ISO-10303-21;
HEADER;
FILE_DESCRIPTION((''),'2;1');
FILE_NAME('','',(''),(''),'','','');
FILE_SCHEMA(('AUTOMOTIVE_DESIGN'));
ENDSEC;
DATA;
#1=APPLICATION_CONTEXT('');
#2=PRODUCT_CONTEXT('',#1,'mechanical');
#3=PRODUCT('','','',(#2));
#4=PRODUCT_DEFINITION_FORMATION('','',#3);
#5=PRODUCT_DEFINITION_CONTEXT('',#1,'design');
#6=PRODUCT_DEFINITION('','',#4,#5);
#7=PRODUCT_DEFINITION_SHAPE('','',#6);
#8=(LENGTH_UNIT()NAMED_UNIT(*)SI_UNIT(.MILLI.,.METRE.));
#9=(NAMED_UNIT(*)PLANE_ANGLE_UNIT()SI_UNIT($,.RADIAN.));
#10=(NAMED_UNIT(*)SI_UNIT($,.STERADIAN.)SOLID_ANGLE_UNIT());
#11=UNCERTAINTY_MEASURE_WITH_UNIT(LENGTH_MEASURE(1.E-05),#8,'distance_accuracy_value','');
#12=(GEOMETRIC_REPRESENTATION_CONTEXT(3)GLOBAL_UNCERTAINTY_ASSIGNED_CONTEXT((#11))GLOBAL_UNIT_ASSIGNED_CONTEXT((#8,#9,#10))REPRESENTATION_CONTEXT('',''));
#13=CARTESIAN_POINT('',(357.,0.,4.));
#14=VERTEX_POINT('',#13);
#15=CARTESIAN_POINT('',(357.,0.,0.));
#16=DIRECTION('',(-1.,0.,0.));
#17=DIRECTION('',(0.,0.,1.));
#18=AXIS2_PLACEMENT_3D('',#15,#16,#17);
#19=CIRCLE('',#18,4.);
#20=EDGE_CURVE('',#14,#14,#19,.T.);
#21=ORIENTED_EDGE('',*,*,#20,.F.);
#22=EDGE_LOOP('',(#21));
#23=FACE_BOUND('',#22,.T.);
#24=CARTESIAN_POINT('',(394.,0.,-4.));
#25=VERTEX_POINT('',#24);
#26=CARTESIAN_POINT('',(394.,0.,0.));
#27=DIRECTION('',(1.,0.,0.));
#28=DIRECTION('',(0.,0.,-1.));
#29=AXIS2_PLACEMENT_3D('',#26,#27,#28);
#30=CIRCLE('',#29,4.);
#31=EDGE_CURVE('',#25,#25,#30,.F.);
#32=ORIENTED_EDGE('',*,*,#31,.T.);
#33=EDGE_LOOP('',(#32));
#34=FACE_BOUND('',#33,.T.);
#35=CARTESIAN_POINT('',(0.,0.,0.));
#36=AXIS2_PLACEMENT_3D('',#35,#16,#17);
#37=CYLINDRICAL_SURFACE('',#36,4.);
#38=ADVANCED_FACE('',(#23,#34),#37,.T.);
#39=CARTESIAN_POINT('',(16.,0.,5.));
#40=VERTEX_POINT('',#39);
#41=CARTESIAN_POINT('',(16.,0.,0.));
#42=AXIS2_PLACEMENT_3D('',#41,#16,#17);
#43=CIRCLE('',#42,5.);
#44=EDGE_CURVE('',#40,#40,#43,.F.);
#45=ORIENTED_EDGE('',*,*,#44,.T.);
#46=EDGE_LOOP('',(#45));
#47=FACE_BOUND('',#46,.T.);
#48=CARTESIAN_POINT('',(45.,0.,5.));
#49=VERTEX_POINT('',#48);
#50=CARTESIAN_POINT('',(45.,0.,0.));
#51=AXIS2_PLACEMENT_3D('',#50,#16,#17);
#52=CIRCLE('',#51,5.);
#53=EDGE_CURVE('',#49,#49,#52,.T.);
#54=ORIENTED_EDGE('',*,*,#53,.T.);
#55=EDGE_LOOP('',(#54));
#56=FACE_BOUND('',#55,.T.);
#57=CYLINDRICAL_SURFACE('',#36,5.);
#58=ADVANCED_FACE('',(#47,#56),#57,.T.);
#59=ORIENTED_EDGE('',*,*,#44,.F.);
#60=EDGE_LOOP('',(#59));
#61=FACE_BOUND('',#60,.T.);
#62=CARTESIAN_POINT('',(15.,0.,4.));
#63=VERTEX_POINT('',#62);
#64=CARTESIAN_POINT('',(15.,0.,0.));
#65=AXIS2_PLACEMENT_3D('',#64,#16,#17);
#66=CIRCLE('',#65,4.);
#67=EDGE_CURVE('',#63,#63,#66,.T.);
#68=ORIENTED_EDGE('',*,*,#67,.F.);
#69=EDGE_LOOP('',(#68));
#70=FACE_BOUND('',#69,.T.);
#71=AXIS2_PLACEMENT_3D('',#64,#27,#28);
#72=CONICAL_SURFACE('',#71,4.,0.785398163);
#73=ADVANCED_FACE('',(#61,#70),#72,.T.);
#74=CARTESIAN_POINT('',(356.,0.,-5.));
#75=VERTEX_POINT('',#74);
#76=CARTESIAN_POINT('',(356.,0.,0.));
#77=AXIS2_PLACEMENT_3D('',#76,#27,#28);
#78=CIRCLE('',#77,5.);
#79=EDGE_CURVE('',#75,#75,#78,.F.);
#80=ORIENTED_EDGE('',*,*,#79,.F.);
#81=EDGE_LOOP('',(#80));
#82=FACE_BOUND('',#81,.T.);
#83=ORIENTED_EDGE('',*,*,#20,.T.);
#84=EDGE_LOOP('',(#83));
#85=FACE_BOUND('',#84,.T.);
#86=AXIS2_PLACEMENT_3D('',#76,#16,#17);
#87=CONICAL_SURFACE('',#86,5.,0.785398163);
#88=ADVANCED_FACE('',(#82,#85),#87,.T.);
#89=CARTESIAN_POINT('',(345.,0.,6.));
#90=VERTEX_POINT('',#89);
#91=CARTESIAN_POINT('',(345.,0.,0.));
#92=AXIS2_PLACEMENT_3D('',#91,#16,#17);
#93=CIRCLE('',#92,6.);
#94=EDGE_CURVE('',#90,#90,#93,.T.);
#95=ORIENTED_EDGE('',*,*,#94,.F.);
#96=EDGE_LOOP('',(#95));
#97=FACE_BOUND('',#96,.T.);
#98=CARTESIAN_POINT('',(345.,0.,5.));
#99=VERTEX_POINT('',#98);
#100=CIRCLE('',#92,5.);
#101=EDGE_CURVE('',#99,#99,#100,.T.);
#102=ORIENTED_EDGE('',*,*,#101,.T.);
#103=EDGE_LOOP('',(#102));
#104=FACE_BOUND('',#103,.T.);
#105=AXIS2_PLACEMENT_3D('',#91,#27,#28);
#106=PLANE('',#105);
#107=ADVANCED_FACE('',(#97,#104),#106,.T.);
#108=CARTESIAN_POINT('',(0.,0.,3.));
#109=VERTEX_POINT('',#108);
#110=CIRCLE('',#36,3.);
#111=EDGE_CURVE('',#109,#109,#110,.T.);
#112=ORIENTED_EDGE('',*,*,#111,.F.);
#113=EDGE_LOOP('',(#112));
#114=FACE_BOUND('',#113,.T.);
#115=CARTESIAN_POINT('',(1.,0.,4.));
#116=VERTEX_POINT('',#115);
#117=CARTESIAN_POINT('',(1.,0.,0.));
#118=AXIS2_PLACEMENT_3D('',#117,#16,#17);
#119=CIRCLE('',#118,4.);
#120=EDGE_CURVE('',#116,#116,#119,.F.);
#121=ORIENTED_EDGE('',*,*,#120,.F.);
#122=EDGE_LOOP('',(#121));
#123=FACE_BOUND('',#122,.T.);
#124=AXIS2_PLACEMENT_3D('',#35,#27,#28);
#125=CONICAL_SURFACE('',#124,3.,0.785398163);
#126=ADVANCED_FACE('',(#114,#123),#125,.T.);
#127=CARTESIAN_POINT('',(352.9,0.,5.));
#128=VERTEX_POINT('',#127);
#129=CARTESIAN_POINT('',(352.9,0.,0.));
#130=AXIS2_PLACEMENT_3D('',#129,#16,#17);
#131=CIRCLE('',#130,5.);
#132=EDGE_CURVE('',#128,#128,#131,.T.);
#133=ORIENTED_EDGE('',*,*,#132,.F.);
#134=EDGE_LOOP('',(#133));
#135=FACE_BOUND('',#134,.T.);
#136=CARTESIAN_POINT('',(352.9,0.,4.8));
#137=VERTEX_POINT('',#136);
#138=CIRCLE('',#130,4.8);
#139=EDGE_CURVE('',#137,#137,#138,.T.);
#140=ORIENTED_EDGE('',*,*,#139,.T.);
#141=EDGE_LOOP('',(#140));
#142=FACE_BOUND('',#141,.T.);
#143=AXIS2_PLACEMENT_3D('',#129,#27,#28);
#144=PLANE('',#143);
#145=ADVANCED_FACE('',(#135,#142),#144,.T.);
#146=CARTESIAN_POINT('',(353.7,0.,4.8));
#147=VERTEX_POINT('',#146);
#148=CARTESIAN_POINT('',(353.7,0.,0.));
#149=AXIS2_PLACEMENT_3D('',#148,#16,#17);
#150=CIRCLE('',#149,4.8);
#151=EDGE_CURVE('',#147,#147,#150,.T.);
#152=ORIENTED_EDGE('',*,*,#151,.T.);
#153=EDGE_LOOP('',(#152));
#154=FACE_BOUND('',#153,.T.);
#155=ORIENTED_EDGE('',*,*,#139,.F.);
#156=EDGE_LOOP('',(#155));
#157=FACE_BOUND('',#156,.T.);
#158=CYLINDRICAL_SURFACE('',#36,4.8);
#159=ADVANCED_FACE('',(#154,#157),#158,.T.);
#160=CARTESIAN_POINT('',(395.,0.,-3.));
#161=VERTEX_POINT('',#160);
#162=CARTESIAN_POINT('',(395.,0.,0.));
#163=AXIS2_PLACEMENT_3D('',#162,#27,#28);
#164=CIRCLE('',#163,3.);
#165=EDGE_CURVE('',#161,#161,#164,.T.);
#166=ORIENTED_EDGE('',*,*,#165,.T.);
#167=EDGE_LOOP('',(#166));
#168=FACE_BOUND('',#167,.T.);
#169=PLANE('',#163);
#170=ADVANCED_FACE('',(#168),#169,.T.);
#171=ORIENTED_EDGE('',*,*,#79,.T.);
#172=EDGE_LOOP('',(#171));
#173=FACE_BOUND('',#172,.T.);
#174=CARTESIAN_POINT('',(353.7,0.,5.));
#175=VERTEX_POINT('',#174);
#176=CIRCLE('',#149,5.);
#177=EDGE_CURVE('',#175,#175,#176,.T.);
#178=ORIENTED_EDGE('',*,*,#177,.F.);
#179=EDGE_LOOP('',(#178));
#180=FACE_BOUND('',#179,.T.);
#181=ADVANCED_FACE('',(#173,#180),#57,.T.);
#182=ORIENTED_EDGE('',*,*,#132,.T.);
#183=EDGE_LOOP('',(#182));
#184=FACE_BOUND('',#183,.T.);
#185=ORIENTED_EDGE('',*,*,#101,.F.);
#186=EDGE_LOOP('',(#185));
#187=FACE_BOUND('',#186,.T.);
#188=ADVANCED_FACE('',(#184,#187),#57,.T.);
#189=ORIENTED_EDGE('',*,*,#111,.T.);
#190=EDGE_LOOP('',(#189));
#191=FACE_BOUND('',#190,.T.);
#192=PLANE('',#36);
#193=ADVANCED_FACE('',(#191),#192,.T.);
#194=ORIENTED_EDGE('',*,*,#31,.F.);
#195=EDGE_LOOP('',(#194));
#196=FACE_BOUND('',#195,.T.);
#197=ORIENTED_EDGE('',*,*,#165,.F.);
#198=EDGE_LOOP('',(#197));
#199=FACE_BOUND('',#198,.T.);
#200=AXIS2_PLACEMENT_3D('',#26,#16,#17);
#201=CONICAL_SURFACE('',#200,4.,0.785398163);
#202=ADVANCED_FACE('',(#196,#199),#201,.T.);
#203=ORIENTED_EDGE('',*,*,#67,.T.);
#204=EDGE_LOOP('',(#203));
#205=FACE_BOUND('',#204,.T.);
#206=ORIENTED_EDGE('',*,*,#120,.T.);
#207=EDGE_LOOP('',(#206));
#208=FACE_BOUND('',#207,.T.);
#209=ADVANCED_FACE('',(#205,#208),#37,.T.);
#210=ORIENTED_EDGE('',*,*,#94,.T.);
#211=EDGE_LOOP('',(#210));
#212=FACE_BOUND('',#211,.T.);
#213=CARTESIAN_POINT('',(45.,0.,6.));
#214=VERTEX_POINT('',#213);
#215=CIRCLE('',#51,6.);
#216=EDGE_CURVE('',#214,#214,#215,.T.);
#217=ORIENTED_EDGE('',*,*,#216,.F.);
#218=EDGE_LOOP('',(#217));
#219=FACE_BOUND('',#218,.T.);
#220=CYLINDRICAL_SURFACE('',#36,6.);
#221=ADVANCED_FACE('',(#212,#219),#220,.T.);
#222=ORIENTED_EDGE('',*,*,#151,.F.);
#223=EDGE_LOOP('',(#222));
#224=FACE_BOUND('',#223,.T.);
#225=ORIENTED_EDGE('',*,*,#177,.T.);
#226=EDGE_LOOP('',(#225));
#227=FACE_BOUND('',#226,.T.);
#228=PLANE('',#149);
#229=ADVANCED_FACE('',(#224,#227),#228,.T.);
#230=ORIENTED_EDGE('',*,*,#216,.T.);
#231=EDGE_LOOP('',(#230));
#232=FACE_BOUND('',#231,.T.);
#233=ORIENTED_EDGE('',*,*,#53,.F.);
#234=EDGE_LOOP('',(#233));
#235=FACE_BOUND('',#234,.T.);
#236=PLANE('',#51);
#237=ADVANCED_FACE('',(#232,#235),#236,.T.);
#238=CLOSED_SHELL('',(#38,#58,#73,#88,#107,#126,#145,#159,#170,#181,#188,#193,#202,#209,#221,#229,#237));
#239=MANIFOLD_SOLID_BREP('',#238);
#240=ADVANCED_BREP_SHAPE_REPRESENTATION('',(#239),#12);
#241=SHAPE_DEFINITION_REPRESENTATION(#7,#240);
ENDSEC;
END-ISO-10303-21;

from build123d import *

# Parameters (mm, degrees)
SKETCH_1_W     = 38
SKETCH_1_H     = 4
CHAMFER_1_SIZE = 1


with BuildPart() as part:
    # 草图1 → 旋转1 (revolve)
    with BuildSketch(Plane.XY, mode=Mode.PRIVATE) as revolve_1_sk:
        Polygon((0, 0), (0, 4), (15, 4), (15, 5), (45, 5), (45, 6), (345, 6), (345, 5), (352.9, 5), (352.9, 4.8), (353.7, 4.8), (353.7, 5), (357, 5), (357, 0), align=None)
        with Locations((376, 2)):
            Rectangle(SKETCH_1_W, SKETCH_1_H)
    revolve(revolve_1_sk.sketch.rotate(Axis((0, 0, 0), (1, 0, 0)), 90), axis=Axis((0, 0, 0), (1, 0, 0)))

    # 倒角1
    chamfer_1_edges = [part.edges().sort_by_distance(p)[0] for p in [
        (0, 0, -4),
        (15, 0, -5),
        (357, 0, -5),
        (395, 0, -4),
    ]]
    chamfer(chamfer_1_edges, length=CHAMFER_1_SIZE - 0.0001)  # a hair under: the kernel refuses the full size


solid = part.part
